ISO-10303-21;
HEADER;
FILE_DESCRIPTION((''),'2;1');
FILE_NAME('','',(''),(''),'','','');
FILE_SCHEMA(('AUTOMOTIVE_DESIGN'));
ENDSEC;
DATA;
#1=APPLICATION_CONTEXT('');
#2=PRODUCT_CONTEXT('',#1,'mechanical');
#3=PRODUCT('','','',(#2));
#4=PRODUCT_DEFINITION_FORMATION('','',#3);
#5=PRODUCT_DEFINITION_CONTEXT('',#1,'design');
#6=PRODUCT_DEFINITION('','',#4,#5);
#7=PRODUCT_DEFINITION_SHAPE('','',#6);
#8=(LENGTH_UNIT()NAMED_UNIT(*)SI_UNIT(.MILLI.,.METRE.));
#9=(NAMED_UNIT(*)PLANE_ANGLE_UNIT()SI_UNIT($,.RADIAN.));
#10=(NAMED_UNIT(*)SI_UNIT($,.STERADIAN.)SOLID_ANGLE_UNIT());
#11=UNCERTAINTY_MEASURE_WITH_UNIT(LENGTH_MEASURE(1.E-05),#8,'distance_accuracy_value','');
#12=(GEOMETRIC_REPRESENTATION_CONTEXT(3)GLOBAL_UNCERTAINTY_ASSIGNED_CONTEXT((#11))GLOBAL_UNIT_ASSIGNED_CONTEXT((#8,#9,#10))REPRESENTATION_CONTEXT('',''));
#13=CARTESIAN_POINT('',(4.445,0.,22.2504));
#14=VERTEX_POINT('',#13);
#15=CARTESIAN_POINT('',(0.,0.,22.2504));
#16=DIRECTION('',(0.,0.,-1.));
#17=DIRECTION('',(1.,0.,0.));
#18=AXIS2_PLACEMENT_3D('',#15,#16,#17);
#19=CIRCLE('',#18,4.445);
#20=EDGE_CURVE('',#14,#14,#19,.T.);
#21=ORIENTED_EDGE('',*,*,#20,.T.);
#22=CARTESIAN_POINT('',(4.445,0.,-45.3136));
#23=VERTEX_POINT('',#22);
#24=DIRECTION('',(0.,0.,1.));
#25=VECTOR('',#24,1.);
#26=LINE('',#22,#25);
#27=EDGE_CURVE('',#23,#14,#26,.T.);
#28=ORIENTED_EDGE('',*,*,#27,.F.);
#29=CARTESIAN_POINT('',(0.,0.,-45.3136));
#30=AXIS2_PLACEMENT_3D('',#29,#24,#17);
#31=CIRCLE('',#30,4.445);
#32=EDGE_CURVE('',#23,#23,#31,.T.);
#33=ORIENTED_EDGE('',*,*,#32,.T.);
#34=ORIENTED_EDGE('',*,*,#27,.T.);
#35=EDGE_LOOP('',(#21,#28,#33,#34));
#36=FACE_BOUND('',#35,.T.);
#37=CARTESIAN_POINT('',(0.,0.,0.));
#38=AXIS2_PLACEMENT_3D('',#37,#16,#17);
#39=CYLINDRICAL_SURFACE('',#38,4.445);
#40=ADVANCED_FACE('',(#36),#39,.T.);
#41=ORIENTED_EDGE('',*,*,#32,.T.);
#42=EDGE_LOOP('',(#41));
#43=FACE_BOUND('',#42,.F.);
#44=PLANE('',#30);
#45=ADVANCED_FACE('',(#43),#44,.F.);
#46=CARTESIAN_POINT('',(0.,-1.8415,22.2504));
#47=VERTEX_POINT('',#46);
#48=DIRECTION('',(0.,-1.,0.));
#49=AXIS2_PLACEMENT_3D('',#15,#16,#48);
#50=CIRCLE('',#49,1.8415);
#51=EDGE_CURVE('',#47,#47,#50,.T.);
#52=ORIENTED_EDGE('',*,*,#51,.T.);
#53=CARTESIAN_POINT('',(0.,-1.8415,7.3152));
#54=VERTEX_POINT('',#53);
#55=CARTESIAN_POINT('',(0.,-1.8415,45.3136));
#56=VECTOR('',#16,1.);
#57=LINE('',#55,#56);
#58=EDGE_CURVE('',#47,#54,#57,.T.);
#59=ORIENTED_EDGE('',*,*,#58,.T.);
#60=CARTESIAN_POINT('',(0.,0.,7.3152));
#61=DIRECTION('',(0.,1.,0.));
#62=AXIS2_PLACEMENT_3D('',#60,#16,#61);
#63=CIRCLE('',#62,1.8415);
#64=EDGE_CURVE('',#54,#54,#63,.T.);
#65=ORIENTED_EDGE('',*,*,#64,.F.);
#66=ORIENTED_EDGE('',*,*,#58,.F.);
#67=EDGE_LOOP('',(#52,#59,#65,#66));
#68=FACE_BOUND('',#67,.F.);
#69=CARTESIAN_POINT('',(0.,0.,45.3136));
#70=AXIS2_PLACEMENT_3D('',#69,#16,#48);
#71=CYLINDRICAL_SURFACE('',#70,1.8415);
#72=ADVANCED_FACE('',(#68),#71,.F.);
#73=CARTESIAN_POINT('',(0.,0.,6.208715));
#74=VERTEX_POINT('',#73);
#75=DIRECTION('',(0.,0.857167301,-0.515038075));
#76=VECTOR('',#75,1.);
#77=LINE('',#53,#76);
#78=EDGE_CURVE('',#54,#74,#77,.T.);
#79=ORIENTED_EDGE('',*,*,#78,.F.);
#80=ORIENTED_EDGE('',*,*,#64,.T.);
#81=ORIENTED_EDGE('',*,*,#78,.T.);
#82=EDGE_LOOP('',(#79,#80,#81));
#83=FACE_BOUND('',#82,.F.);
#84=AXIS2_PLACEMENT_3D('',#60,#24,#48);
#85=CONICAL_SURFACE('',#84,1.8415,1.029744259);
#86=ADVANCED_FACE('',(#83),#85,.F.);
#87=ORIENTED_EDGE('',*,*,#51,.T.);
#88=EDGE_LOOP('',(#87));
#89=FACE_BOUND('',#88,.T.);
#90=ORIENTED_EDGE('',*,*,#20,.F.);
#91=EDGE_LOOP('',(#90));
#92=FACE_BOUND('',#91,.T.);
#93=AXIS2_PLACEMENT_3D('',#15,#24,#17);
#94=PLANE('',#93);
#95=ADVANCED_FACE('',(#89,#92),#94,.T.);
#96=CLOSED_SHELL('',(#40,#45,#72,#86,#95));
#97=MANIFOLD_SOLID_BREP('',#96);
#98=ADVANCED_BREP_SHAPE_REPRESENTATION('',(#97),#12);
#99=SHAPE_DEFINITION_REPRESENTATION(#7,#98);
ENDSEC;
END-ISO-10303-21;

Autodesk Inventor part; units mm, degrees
ref_plane "YZ Plane" through (0, 0, 0) normal (1, 0, 0) x (0, 1, 0)
ref_plane "XZ Plane" through (0, 0, 0) normal (0, 1, 0) x (-1, 0, 0)
ref_plane "XY Plane" through (0, 0, 0) normal (0, 0, 1) x (1, 0, 0)
sketch "Sketch1" plane through (0, 0, 0) normal (0, 0, 1) x (1, 0, 0)
  circle A0 centre (0, 0) radius 4.445
  dimension "d1" = 8.89
extrude "Extrusion1" add sketch "Sketch1" along normal mid plane 90.6272
sketch "Sketch2" plane through (0, 0, 45.3136) normal (0, 0, 1) x (1, 0, 0)
  point P0 (0, 0)
hole "Hole1" at (0, 0, 45.3136) direction (0, 0, -1) diameter 3.683 depth 37.9984 tip angle 118 thread size "10-24 UNC" class "2B" standard "ANSI Unified Screw Threads"
thicken "Thicken1" operation add thickness 23.0632 both sides no extend neighbours yes toward (0, 0, -1) faces at (3.5296, -0.4286, 45.3136)
properties part number "drive train standoff"
